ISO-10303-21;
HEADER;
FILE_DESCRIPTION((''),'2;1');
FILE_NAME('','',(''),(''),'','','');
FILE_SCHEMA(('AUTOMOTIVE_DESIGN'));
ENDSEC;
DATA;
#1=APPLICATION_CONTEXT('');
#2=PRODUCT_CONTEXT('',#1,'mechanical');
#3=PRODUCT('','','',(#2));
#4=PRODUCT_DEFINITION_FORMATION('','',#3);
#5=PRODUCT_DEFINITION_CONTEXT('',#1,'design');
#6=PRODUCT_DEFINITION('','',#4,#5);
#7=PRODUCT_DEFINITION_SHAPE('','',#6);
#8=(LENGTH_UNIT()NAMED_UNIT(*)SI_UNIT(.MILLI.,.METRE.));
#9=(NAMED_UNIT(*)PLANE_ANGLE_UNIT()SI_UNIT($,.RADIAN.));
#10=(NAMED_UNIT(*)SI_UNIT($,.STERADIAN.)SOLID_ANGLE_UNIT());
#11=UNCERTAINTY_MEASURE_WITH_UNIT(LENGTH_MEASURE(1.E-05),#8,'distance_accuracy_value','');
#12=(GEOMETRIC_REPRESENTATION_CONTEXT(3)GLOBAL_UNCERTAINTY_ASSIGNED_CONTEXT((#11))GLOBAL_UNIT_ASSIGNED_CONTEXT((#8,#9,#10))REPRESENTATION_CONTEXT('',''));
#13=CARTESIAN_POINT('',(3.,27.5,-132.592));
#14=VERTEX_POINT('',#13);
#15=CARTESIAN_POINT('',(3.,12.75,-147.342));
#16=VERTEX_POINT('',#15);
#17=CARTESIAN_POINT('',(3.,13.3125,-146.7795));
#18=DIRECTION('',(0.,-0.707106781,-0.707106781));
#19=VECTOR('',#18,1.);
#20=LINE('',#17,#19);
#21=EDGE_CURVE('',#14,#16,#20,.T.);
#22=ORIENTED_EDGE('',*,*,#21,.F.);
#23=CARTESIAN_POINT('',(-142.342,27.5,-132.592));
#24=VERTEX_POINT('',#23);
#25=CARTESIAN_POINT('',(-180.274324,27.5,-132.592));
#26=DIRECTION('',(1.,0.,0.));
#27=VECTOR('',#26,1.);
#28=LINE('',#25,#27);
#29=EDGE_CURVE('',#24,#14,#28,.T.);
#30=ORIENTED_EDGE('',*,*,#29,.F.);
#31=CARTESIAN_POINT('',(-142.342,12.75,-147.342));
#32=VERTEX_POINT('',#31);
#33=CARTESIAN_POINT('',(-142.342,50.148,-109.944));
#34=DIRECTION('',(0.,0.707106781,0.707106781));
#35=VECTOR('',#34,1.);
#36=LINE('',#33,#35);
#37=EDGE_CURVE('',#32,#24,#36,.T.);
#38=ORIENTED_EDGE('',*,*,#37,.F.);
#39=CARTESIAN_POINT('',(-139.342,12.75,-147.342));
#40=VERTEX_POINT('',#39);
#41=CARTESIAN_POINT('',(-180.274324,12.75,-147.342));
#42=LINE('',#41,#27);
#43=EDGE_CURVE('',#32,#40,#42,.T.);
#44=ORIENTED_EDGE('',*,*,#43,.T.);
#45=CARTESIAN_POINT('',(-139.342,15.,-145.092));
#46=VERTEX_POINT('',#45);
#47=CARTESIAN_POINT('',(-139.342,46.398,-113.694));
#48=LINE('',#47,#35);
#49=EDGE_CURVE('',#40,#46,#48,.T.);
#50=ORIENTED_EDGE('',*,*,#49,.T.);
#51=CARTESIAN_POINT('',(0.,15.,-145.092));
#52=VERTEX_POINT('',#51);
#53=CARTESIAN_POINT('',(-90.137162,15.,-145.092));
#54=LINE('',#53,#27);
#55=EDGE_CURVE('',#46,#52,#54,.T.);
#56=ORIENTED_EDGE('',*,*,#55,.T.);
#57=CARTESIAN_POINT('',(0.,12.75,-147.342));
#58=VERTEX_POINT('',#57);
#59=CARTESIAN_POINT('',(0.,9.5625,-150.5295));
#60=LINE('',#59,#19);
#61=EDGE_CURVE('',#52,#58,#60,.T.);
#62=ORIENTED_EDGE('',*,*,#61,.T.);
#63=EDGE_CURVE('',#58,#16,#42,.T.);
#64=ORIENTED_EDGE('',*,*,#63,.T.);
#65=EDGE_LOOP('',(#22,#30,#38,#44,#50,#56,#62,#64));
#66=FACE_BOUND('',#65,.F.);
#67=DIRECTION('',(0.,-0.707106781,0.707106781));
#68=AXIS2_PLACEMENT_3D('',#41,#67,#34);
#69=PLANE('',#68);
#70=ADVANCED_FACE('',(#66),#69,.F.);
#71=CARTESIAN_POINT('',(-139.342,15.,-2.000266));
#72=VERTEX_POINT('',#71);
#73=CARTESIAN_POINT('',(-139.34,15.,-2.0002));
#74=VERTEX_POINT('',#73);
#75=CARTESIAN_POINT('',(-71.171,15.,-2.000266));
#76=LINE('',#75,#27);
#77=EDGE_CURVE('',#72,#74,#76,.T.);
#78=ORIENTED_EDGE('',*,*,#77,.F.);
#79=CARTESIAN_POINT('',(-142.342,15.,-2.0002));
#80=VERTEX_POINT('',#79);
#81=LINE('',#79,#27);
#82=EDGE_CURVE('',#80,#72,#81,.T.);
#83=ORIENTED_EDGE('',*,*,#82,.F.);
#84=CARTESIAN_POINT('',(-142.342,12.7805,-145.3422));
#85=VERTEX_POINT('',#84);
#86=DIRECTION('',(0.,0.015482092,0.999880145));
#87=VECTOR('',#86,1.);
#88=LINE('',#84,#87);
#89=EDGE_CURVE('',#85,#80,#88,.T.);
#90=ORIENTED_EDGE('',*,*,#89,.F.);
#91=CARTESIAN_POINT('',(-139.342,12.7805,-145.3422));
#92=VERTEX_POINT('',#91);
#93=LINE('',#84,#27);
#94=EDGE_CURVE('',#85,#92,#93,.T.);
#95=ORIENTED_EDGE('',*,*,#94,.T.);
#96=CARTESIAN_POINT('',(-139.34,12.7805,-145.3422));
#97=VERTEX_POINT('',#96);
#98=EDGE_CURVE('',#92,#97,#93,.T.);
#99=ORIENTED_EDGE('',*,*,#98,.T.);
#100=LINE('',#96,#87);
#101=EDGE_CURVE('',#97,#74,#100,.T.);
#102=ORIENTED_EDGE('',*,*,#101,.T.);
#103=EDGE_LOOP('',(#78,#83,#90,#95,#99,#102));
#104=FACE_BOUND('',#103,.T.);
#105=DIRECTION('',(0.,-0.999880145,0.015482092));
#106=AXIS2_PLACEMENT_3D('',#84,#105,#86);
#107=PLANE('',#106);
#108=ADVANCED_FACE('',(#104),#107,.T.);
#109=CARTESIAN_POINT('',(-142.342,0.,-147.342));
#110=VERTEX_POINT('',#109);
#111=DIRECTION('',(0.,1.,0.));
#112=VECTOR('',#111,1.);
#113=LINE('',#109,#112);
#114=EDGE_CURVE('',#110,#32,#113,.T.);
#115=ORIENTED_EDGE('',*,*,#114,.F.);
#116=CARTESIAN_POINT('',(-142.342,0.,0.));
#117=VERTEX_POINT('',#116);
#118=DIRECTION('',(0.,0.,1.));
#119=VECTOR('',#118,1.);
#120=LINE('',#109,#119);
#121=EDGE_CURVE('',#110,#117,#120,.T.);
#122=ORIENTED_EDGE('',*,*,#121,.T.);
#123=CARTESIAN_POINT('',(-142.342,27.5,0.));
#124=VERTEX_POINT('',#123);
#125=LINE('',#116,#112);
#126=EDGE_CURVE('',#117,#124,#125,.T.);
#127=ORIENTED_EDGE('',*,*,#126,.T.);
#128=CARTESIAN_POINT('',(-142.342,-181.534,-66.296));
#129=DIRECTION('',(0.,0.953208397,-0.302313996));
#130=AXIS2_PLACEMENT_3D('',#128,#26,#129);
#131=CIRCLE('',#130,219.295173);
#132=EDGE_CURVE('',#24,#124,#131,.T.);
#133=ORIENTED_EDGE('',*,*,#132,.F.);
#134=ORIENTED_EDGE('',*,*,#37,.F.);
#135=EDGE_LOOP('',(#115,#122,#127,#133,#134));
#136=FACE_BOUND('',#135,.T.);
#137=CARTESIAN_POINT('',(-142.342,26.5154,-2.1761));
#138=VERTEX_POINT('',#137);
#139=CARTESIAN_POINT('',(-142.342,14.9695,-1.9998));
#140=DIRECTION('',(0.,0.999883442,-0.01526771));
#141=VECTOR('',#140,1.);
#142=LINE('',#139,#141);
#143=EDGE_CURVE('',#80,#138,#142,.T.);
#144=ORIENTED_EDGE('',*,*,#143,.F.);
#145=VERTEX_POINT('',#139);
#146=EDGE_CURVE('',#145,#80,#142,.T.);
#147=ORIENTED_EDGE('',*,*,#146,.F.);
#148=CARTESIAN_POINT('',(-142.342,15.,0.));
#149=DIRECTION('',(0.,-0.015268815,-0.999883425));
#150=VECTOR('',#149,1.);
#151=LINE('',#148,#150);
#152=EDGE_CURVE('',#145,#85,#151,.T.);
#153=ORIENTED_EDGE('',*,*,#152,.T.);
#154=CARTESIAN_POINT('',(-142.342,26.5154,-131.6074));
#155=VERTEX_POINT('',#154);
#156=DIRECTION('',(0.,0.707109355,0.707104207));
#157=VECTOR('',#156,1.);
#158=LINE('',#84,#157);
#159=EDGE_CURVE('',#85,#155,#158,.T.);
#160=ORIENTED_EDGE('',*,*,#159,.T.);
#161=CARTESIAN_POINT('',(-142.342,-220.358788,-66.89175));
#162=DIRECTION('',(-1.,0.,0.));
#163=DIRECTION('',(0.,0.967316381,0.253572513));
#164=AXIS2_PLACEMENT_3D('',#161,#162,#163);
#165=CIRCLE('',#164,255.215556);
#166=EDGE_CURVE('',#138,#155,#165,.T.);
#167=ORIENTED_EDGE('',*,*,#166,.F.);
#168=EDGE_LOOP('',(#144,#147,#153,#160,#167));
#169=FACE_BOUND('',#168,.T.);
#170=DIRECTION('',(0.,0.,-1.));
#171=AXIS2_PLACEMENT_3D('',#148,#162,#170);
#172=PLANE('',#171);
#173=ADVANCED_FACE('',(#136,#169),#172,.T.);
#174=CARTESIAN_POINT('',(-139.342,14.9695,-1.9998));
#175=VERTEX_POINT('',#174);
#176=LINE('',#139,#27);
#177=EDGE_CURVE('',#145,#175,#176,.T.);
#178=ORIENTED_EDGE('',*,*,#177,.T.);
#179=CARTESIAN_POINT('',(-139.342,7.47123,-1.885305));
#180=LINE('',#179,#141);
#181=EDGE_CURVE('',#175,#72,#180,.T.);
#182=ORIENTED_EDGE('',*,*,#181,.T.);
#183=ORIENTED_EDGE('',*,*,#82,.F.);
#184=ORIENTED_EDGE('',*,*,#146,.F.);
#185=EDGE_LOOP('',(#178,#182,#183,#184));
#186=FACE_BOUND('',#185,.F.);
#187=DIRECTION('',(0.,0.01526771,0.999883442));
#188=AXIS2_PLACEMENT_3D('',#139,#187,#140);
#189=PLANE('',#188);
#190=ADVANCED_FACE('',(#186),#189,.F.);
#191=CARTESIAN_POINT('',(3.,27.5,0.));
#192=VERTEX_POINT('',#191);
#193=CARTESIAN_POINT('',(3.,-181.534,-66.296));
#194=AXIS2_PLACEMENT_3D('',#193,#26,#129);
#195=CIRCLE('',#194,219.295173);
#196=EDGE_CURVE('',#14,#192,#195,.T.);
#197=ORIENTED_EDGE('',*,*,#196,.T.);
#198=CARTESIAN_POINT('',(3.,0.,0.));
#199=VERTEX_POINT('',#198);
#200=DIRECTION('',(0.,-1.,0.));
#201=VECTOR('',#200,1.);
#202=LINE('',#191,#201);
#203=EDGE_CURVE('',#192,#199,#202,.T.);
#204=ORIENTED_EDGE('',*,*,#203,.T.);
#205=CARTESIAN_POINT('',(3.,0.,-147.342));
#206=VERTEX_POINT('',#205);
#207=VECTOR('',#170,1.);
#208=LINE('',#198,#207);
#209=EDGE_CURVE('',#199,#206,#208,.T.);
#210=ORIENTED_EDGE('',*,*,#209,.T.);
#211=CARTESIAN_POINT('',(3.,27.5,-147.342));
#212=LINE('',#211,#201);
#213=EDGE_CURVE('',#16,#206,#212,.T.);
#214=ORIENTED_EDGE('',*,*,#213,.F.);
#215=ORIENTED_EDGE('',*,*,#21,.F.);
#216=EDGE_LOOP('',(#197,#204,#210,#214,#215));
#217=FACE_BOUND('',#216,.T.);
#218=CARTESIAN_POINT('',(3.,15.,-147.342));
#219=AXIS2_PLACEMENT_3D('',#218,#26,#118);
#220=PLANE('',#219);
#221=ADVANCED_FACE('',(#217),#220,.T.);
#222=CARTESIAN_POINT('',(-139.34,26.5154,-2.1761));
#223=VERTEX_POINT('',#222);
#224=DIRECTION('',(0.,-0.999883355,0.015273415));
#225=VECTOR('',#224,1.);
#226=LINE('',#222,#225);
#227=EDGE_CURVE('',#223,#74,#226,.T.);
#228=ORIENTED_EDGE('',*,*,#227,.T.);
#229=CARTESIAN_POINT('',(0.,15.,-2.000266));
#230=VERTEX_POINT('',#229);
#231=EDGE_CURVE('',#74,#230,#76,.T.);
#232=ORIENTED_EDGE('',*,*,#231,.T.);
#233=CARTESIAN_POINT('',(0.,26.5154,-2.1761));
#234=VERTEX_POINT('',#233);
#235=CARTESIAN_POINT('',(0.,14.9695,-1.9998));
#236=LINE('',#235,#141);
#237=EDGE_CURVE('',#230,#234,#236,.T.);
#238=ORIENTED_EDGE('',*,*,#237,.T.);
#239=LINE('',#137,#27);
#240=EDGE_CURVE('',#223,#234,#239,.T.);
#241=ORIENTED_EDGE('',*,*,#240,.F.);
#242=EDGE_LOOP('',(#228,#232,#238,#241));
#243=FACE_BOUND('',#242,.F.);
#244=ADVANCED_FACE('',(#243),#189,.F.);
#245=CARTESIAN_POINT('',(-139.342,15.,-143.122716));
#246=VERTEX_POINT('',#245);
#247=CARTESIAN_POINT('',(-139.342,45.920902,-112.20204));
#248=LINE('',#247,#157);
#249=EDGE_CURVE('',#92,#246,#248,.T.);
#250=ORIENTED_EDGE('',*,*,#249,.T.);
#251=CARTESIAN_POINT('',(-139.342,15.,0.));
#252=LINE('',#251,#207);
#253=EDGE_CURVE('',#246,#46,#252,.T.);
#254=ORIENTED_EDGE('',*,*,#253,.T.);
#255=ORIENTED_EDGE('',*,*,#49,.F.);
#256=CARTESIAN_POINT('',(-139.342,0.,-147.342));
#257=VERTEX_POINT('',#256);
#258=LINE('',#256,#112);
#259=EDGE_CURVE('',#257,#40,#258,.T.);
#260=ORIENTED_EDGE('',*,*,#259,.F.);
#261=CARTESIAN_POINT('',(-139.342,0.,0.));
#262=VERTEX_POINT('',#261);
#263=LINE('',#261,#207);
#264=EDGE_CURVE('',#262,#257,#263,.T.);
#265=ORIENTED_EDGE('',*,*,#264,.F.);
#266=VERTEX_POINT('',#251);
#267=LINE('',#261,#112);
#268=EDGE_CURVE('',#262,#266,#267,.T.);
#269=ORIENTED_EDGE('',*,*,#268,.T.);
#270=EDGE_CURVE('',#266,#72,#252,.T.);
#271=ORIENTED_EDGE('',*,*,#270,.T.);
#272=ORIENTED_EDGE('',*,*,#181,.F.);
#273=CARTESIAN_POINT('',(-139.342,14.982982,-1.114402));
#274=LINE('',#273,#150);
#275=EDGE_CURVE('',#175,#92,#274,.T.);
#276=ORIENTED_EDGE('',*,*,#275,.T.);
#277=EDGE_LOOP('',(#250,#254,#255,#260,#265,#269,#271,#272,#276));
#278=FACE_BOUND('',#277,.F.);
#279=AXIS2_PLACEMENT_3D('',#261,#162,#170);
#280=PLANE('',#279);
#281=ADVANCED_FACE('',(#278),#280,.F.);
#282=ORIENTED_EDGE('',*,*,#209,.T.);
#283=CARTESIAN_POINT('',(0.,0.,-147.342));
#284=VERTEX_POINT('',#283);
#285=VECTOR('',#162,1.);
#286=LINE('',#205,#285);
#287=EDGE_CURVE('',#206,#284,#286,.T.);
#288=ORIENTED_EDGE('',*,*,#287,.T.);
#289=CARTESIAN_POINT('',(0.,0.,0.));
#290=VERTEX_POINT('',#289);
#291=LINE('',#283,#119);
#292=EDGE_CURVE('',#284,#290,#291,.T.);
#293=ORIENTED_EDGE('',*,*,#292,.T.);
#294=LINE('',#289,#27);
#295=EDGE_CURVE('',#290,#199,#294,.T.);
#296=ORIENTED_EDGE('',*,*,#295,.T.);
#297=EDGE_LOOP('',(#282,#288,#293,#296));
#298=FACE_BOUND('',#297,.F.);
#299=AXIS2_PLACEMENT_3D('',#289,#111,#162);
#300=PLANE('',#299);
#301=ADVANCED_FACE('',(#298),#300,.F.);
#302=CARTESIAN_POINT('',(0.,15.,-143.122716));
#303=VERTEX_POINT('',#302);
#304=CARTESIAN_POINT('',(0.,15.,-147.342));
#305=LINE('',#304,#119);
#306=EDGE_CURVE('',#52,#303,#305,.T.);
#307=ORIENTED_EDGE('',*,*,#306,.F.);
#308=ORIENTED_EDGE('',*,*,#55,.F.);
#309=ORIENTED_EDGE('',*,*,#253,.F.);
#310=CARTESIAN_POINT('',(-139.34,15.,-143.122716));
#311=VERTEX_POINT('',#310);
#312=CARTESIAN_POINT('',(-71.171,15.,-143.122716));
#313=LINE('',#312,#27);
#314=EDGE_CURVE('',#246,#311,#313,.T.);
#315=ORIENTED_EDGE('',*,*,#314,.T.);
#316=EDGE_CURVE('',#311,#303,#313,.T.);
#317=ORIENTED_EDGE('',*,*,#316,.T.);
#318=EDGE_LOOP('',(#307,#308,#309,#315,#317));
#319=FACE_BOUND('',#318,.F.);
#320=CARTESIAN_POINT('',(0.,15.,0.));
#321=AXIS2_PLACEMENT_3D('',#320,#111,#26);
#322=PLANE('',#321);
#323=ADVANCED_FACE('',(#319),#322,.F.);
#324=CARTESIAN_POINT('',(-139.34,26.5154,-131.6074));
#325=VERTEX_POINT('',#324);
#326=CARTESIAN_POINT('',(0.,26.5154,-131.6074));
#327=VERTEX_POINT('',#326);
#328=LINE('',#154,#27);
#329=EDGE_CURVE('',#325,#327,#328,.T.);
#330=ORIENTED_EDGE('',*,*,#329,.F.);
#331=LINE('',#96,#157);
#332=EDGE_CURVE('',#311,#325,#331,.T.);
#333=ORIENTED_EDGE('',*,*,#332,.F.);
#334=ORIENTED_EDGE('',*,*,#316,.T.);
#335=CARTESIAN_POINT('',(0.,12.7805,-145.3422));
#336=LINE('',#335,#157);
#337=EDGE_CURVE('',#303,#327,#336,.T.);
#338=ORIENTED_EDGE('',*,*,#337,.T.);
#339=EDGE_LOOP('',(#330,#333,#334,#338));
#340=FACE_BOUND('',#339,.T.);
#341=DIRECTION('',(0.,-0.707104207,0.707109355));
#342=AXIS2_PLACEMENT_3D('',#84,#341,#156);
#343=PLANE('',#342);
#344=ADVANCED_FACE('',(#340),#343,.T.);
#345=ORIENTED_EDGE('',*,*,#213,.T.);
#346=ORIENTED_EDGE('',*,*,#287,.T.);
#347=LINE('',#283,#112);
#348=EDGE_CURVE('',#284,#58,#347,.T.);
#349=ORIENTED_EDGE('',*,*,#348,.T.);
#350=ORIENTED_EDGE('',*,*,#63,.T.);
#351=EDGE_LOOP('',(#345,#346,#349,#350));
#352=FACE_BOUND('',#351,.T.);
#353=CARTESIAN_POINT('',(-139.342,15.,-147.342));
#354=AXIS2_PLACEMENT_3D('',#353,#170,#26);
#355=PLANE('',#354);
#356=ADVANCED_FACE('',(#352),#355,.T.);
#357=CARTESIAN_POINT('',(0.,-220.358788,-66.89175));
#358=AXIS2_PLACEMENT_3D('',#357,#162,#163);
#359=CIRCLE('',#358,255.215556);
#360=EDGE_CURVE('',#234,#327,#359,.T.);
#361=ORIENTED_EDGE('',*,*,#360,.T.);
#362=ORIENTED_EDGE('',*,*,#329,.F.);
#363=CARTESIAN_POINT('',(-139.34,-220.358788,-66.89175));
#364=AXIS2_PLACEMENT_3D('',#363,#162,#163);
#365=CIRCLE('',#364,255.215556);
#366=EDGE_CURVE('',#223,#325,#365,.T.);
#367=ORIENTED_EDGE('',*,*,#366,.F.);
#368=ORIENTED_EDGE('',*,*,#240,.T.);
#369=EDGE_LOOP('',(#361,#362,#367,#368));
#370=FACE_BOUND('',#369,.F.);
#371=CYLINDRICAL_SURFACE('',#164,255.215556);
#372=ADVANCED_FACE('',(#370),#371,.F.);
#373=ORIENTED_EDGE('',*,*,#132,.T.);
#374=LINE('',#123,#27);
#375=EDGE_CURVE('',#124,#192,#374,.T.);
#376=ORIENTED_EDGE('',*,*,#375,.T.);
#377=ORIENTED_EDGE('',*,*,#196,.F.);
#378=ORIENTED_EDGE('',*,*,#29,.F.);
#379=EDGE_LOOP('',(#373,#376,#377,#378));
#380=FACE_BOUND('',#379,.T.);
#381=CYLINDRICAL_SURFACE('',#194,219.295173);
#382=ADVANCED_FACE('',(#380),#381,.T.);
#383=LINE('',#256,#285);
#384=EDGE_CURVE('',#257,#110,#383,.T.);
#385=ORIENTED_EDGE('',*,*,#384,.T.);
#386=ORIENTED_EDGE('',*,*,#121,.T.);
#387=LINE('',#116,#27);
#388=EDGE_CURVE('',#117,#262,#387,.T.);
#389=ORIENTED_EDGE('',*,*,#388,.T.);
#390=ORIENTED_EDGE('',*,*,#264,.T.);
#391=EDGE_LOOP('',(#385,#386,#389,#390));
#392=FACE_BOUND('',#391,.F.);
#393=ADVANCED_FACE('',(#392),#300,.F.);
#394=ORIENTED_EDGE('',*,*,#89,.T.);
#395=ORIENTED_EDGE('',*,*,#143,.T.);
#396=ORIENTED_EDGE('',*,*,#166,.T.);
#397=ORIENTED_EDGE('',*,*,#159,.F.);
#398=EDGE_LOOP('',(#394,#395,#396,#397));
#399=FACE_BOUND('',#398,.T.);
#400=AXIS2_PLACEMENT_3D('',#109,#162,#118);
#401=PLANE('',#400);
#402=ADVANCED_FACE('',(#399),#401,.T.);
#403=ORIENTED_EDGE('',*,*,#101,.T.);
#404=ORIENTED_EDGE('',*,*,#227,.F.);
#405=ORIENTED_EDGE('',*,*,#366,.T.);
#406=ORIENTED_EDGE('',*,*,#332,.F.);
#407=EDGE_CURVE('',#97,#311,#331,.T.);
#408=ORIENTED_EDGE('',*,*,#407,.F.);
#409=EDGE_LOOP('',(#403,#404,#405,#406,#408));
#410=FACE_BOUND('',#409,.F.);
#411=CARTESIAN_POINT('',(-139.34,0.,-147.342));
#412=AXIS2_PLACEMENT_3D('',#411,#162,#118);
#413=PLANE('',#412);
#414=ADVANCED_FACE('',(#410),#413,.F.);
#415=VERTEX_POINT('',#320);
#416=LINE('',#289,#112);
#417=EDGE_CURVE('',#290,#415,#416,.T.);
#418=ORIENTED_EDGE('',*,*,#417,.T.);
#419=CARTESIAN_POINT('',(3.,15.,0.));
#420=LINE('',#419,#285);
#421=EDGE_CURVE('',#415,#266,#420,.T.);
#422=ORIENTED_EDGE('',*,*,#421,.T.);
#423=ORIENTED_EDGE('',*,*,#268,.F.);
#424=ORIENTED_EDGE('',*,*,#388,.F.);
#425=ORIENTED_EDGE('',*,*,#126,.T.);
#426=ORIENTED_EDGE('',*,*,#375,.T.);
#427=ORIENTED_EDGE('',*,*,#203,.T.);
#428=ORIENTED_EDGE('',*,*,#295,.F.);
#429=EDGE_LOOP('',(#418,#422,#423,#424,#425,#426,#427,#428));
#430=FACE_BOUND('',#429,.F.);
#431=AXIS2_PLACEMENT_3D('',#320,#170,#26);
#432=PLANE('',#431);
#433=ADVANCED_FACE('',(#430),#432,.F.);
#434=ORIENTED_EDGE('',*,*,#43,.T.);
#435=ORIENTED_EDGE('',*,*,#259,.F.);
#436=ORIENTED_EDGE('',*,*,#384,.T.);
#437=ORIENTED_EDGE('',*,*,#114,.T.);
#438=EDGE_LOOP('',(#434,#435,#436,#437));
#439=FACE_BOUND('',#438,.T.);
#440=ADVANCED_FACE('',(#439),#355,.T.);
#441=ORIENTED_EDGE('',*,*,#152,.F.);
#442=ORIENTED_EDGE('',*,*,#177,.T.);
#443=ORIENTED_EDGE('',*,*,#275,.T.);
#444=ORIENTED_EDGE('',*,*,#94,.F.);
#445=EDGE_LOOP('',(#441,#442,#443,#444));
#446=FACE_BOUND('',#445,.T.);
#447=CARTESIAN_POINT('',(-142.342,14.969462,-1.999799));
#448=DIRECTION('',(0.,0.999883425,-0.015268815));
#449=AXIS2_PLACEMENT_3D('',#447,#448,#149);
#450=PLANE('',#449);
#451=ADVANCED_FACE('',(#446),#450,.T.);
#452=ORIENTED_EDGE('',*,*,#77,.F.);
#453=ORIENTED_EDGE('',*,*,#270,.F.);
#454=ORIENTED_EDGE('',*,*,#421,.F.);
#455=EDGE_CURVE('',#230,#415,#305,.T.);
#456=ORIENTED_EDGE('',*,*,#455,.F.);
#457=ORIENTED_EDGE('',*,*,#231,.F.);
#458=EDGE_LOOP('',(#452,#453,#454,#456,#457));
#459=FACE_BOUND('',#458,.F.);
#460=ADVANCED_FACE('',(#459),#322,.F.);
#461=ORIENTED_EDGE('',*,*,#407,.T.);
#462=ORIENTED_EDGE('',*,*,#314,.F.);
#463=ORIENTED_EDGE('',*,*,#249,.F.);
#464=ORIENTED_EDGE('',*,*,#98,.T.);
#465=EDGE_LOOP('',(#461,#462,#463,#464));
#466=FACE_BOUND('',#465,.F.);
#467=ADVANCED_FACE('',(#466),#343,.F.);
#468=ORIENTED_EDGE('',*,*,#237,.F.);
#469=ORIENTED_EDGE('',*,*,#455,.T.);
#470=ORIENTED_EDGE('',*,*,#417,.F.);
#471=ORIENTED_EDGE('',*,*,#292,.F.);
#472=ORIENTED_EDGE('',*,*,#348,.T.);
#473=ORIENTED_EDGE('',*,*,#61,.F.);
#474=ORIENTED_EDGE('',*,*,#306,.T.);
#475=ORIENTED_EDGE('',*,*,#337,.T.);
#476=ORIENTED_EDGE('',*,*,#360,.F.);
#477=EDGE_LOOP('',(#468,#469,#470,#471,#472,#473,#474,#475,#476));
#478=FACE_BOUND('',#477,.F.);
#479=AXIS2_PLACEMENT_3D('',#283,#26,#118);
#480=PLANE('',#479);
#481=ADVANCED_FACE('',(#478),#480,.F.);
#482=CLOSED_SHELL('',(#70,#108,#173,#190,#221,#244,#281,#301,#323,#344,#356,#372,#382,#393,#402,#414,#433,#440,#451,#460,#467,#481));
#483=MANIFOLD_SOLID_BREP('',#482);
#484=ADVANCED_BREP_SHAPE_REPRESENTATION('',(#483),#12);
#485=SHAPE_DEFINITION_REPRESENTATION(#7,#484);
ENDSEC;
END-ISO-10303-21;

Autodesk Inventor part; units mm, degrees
ref_plane "YZ Plane" through (0, 0, 0) normal (1, 0, 0) x (0, 1, 0)
ref_plane "XZ Plane" through (0, 0, 0) normal (0, 1, 0) x (-1, 0, 0)
ref_plane "XY Plane" through (0, 0, 0) normal (0, 0, 1) x (1, 0, 0)
sketch "Sketch1" plane through (0, 0, 0) normal (0, 1, 0) x (-1, 0, 0)
  line L0 (0, 0) -> (139.342, 0)
  line L1 (139.342, 0) -> (139.342, -147.342)
  line L2 (139.342, -147.342) -> (0, -147.342)
  line L3 (0, -147.342) -> (0, 0)
  line L4 (139.342, -147.342) -> (142.342, -147.342)
  line L5 (142.342, -147.342) -> (142.342, 0)
  line L6 (142.342, 0) -> (139.342, 0)
  line L7 (0, 0) -> (-3, 0)
  line L8 (-3, 0) -> (-3, -147.342)
  line L9 (-3, -147.342) -> (0, -147.342)
  dimension "d0" = 139.342
  dimension "d1" = 147.342
  dimension "d2" = 3
  dimension "d3" = 3
extrude "Extrusion1" add sketch "Sketch1" along normal blind 15 contours L3 L9 L8 L7 | L6 L5 L4 L1
sketch "Sketch2" plane through (-139.342, 0, 0) normal (1, 0, 0) x (0, 0, -1)
  point P0 (0, 0)
sketch "Sketch3" plane through (0, 15, 0) normal (0, 1, 0) x (1, 0, 0)
  point P0 (0, 0)
sketch "Sketch4" plane through (0, 15, 0) normal (0, 1, 0) x (1, 0, 0)
  line L0 (-139.342, 147.342) -> (-142.342, 147.342) projected
  line L1 (0, 0) -> (3, 0) projected
  line L2 (-142.342, 147.342) -> (3, 147.342)
  line L3 (3, 147.342) -> (3, 0)
  line L4 (3, 0) -> (-142.342, 0)
  line L5 (-142.342, 0) -> (-142.342, 147.342)
extrude "Extrusion2" add sketch "Sketch4" along normal blind 12.5
chamfer "Chamfer1" distance 14.75 angle 45 1 edges at (-69.671, 27.5, -147.342)
sketch "Sketch5" plane through (3, 0, 0) normal (1, 0, 0) x (0, 0, -1)
  line L0 (132.592, 27.5) -> (147.342, 12.75) projected
  arc A0 (132.592, 27.5) -> (0, 27.5) centre (66.296, -181.534) ccw
  line L1 (0, 27.5) -> (132.592, 27.5)
  point P0 (0, 0)
extrude "Extrusion3" add sketch "Sketch5" against normal blind 145.342
sketch "Sketch6" plane through (-142.342, 0, -147.342) normal (-1, 0, 0) x (0, 0, 1)
  line L0 (147.342, 0) -> (147.342, 27.5) projected
  line L1 (147.342, 0) -> (147.342, 15)
  line L2 (0, 12.75) -> (14.75, 27.5) projected
  line L3 (147.342, 15) -> (0, 12.75)
  line L4 (0, 12.75) -> (1.9998, 12.7805)
  line L5 (1.9998, 12.7805) -> (15.7346, 26.5154)
  line L6 (147.342, 15) -> (145.3422, 14.9695)
  line L7 (145.3422, 14.9695) -> (145.1659, 26.5154)
  arc A0 (145.1659, 26.5154) -> (15.7346, 26.5154) centre (80.4503, -220.3584) ccw
  dimension "d13" = 15
  dimension "d14" = 2
  dimension "d15" = 2
extrude "Extrusion4" cut sketch "Sketch6" against normal blind 142.342
sketch "Sketch7" plane through (-142.342, 0, -147.342) normal (-1, 0, 0) x (0, 0, 1)
  line L0 (1.9998, 12.7805) -> (145.3422, 14.9695) projected
  arc A0 (145.1659, 26.5154) -> (15.7346, 26.5154) centre (80.4503, -220.3584) ccw projected
  line L1 (1.9998, 12.7805) -> (15.7346, 26.5154)
  line L2 (145.1659, 26.5154) -> (145.3418, 15) projected
  line L3 (145.1659, 26.5154) -> (145.3418, 15)
  line L4 (145.3418, 15) -> (145.3418, 15)
  line L5 (1.9998, 12.7805) -> (145.3418, 15)
  arc A1 (145.1659, 26.5154) -> (15.7346, 26.5154) centre (80.4503, -220.3584) ccw
  point P0 (147.342, 0)
extrude "Extrusion5" add sketch "Sketch7" against normal blind 3.002
properties part number "El capo"
